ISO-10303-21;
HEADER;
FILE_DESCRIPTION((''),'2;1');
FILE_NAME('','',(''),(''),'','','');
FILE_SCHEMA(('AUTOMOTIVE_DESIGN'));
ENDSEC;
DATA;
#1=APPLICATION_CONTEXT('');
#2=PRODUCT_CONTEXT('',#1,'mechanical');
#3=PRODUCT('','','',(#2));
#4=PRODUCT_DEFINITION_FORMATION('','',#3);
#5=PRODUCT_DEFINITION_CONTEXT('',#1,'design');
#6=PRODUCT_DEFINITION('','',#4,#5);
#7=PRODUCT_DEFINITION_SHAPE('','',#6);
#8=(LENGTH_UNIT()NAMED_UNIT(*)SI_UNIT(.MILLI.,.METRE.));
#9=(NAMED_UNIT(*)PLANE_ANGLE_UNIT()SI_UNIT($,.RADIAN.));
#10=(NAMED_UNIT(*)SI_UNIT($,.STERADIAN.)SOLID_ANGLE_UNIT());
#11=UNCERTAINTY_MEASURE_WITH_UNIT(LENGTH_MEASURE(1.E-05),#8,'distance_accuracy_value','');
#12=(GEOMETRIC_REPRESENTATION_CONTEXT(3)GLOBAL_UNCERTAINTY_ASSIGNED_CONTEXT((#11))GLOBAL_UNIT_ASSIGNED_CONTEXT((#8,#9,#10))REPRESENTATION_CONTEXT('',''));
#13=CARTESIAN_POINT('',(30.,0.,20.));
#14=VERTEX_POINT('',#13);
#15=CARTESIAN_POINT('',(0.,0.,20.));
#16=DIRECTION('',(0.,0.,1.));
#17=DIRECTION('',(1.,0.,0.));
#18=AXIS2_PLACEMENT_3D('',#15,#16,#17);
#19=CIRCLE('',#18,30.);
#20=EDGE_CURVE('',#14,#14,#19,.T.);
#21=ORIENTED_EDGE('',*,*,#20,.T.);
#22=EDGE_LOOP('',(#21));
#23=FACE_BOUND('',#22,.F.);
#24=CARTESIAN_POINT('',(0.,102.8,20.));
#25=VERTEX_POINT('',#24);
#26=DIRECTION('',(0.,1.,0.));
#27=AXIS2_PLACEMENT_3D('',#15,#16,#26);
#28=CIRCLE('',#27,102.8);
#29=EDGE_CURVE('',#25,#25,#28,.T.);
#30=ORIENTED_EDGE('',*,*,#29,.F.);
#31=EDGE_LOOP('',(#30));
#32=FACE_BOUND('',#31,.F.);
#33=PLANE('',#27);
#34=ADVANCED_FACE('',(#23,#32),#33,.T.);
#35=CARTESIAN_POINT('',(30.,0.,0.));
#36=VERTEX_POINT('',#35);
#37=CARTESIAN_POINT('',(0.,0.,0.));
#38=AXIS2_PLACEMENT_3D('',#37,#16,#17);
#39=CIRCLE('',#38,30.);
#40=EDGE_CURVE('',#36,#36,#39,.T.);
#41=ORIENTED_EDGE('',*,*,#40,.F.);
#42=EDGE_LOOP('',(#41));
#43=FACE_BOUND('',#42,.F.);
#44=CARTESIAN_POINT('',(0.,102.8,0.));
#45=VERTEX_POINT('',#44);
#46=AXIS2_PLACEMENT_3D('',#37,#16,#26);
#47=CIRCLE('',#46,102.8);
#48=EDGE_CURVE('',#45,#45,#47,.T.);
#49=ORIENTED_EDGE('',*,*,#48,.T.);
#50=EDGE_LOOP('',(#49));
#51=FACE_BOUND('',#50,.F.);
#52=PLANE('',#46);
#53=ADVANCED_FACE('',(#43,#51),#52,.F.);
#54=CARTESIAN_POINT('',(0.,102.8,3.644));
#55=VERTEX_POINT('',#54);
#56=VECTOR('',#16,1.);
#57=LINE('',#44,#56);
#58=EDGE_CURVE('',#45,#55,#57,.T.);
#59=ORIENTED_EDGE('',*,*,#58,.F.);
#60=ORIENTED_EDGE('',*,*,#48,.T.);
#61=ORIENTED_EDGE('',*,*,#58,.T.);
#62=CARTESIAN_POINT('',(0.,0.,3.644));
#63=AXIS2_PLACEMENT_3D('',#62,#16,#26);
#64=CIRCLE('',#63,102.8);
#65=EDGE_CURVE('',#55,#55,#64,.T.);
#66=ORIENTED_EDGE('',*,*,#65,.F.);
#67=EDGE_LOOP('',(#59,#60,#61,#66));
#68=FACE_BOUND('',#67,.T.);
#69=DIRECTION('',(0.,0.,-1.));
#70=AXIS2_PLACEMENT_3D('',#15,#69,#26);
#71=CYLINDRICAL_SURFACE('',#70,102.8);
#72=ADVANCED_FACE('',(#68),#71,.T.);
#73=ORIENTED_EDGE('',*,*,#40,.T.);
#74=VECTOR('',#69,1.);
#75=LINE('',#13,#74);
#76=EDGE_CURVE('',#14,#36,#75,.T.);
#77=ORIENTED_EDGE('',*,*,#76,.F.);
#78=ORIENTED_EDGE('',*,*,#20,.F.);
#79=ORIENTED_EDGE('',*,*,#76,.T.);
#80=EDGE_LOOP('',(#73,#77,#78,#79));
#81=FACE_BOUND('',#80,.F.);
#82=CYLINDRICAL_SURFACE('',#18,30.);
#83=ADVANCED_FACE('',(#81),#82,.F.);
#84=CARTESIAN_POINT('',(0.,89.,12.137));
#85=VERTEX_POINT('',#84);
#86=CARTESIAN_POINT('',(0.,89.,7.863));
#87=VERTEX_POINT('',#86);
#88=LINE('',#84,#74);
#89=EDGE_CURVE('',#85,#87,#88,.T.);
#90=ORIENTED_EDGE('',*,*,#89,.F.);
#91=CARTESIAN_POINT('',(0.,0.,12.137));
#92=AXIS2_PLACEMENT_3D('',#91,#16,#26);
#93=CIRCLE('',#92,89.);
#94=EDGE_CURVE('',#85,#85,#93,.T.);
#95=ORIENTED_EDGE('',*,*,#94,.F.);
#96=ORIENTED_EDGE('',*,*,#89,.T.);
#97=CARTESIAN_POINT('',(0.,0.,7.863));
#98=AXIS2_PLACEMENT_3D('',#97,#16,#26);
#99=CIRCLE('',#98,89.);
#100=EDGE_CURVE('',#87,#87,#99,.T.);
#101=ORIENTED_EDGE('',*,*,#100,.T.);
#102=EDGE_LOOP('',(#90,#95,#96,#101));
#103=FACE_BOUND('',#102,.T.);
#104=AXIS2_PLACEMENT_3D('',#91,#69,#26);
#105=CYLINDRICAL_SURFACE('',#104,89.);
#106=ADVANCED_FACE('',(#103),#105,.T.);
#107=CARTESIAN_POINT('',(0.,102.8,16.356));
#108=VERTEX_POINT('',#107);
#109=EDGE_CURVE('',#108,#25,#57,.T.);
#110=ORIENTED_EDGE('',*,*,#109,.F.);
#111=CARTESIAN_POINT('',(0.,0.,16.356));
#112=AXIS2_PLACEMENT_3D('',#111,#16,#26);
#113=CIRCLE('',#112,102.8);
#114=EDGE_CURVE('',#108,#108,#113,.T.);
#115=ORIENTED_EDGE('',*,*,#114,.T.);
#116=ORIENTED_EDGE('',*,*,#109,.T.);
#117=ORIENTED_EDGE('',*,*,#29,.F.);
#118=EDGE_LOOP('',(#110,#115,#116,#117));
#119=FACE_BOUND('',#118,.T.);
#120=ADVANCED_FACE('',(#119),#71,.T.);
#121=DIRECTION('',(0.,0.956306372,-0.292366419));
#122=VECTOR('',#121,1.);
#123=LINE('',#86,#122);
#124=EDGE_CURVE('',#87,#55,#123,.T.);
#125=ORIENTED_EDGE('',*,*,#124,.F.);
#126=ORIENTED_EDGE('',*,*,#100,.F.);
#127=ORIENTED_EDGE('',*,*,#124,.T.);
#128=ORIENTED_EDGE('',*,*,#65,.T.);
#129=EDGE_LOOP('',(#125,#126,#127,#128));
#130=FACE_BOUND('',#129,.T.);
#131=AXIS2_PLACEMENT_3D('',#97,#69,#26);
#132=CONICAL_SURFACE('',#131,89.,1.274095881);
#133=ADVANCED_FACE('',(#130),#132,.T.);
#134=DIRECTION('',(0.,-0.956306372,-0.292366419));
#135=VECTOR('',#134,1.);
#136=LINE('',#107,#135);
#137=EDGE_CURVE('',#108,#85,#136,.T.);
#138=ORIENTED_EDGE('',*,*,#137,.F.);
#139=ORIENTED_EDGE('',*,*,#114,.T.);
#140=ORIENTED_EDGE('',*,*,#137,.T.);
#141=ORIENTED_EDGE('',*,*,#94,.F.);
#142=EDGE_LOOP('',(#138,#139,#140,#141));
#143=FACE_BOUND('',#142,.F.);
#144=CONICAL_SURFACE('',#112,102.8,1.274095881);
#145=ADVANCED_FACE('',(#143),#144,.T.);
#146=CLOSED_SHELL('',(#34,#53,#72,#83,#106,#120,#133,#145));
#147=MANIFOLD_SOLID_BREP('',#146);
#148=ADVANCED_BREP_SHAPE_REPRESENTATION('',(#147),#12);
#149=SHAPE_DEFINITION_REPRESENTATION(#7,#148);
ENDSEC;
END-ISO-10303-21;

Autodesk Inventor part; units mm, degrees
ref_plane "YZ Plane" through (0, 0, 0) normal (1, 0, 0) x (0, 1, 0)
ref_plane "XZ Plane" through (0, 0, 0) normal (0, 1, 0) x (-1, 0, 0)
sketch "Boceto principal" plane through (0, 0, 0) normal (1, 0, 0) x (0, 1, 0)
  line L0 (0, 20) -> (102.8, 20)
  line L1 (102.8, 20) -> (102.8, 16.356)
  line L2 (102.8, 16.356) -> (89, 12.137)
  line L3 (89, 12.137) -> (89, 7.863)
  line L4 (89, 7.863) -> (102.8, 3.644)
  line L5 (102.8, 3.644) -> (102.8, 0)
  line L6 (102.8, 0) -> (0, 0)
  line L7 (100, 15.5) -> (100, 4.5) construction
  line L8 (89, 10) -> (100, 10) construction
  line L9 (102.8, 16.356) -> (102.8, 3.644)
  line L10 (0, -4) -> (0, 24) projected
  line L11 (0, 0) -> (0, 20)
  dimension "d0" = 11
  dimension "d1" = 34
  dimension "d2" = 2.8
  dimension "d6" = 20
  dimension "d21" = 200
  dimension "d25" = 13.8
  dimension "d27" = 10
ref_plane "Plano de correa" through (0, 89, 10) normal (0, 0, 1) x (1, 0, 0)
revolve "Cuerpo" add sketch "Boceto principal" angle 360 about axis through (0, 0, -10) along (0, 0, 1)
revolve "Para ranuras" cut sketch "Boceto principal" angle 360 about axis through (0, 0, -10) along (0, 0, 1) contours L9 L4 L3 L2
fillet "Empalme externo" [suppressed]
fillet "Empalme interno" [suppressed]
pattern_of_one "Patrón para ranuras"
sketch "Boceto2" plane through (0, 0, 20) normal (0, 0, 1) x (1, 0, 0)
  circle A0 centre (0, 0) radius 30
  dimension "d28" = 60
extrude "Extrusión1" cut sketch "Boceto2" against normal blind 30
equation "\"d0\" = da_Bw"
equation "\"d1\" = da_Alfa"
equation "\"d2\" = da_c"
equation "\"d21\" = da_Dw"
equation "\"d25\" = da_Hd"
equation "\"d27\" = da_Se"
equation "\"da_r1\" = 0"
equation "\"da_r2\" = 0"
equation "\"d18\" = da_Sg"
equation "\"da_Bw\" = 11"
equation "\"da_Alfa\" = 34deg"
equation "\"da_c\" = 2.8"
equation "\"da_Dw\" = 200"
equation "\"da_Hd\" = 13.8"
equation "\"da_Se\" = 10"
equation "\"da_Sg\" = 15"
properties part number "Polea ranurada2" material "Steel"
